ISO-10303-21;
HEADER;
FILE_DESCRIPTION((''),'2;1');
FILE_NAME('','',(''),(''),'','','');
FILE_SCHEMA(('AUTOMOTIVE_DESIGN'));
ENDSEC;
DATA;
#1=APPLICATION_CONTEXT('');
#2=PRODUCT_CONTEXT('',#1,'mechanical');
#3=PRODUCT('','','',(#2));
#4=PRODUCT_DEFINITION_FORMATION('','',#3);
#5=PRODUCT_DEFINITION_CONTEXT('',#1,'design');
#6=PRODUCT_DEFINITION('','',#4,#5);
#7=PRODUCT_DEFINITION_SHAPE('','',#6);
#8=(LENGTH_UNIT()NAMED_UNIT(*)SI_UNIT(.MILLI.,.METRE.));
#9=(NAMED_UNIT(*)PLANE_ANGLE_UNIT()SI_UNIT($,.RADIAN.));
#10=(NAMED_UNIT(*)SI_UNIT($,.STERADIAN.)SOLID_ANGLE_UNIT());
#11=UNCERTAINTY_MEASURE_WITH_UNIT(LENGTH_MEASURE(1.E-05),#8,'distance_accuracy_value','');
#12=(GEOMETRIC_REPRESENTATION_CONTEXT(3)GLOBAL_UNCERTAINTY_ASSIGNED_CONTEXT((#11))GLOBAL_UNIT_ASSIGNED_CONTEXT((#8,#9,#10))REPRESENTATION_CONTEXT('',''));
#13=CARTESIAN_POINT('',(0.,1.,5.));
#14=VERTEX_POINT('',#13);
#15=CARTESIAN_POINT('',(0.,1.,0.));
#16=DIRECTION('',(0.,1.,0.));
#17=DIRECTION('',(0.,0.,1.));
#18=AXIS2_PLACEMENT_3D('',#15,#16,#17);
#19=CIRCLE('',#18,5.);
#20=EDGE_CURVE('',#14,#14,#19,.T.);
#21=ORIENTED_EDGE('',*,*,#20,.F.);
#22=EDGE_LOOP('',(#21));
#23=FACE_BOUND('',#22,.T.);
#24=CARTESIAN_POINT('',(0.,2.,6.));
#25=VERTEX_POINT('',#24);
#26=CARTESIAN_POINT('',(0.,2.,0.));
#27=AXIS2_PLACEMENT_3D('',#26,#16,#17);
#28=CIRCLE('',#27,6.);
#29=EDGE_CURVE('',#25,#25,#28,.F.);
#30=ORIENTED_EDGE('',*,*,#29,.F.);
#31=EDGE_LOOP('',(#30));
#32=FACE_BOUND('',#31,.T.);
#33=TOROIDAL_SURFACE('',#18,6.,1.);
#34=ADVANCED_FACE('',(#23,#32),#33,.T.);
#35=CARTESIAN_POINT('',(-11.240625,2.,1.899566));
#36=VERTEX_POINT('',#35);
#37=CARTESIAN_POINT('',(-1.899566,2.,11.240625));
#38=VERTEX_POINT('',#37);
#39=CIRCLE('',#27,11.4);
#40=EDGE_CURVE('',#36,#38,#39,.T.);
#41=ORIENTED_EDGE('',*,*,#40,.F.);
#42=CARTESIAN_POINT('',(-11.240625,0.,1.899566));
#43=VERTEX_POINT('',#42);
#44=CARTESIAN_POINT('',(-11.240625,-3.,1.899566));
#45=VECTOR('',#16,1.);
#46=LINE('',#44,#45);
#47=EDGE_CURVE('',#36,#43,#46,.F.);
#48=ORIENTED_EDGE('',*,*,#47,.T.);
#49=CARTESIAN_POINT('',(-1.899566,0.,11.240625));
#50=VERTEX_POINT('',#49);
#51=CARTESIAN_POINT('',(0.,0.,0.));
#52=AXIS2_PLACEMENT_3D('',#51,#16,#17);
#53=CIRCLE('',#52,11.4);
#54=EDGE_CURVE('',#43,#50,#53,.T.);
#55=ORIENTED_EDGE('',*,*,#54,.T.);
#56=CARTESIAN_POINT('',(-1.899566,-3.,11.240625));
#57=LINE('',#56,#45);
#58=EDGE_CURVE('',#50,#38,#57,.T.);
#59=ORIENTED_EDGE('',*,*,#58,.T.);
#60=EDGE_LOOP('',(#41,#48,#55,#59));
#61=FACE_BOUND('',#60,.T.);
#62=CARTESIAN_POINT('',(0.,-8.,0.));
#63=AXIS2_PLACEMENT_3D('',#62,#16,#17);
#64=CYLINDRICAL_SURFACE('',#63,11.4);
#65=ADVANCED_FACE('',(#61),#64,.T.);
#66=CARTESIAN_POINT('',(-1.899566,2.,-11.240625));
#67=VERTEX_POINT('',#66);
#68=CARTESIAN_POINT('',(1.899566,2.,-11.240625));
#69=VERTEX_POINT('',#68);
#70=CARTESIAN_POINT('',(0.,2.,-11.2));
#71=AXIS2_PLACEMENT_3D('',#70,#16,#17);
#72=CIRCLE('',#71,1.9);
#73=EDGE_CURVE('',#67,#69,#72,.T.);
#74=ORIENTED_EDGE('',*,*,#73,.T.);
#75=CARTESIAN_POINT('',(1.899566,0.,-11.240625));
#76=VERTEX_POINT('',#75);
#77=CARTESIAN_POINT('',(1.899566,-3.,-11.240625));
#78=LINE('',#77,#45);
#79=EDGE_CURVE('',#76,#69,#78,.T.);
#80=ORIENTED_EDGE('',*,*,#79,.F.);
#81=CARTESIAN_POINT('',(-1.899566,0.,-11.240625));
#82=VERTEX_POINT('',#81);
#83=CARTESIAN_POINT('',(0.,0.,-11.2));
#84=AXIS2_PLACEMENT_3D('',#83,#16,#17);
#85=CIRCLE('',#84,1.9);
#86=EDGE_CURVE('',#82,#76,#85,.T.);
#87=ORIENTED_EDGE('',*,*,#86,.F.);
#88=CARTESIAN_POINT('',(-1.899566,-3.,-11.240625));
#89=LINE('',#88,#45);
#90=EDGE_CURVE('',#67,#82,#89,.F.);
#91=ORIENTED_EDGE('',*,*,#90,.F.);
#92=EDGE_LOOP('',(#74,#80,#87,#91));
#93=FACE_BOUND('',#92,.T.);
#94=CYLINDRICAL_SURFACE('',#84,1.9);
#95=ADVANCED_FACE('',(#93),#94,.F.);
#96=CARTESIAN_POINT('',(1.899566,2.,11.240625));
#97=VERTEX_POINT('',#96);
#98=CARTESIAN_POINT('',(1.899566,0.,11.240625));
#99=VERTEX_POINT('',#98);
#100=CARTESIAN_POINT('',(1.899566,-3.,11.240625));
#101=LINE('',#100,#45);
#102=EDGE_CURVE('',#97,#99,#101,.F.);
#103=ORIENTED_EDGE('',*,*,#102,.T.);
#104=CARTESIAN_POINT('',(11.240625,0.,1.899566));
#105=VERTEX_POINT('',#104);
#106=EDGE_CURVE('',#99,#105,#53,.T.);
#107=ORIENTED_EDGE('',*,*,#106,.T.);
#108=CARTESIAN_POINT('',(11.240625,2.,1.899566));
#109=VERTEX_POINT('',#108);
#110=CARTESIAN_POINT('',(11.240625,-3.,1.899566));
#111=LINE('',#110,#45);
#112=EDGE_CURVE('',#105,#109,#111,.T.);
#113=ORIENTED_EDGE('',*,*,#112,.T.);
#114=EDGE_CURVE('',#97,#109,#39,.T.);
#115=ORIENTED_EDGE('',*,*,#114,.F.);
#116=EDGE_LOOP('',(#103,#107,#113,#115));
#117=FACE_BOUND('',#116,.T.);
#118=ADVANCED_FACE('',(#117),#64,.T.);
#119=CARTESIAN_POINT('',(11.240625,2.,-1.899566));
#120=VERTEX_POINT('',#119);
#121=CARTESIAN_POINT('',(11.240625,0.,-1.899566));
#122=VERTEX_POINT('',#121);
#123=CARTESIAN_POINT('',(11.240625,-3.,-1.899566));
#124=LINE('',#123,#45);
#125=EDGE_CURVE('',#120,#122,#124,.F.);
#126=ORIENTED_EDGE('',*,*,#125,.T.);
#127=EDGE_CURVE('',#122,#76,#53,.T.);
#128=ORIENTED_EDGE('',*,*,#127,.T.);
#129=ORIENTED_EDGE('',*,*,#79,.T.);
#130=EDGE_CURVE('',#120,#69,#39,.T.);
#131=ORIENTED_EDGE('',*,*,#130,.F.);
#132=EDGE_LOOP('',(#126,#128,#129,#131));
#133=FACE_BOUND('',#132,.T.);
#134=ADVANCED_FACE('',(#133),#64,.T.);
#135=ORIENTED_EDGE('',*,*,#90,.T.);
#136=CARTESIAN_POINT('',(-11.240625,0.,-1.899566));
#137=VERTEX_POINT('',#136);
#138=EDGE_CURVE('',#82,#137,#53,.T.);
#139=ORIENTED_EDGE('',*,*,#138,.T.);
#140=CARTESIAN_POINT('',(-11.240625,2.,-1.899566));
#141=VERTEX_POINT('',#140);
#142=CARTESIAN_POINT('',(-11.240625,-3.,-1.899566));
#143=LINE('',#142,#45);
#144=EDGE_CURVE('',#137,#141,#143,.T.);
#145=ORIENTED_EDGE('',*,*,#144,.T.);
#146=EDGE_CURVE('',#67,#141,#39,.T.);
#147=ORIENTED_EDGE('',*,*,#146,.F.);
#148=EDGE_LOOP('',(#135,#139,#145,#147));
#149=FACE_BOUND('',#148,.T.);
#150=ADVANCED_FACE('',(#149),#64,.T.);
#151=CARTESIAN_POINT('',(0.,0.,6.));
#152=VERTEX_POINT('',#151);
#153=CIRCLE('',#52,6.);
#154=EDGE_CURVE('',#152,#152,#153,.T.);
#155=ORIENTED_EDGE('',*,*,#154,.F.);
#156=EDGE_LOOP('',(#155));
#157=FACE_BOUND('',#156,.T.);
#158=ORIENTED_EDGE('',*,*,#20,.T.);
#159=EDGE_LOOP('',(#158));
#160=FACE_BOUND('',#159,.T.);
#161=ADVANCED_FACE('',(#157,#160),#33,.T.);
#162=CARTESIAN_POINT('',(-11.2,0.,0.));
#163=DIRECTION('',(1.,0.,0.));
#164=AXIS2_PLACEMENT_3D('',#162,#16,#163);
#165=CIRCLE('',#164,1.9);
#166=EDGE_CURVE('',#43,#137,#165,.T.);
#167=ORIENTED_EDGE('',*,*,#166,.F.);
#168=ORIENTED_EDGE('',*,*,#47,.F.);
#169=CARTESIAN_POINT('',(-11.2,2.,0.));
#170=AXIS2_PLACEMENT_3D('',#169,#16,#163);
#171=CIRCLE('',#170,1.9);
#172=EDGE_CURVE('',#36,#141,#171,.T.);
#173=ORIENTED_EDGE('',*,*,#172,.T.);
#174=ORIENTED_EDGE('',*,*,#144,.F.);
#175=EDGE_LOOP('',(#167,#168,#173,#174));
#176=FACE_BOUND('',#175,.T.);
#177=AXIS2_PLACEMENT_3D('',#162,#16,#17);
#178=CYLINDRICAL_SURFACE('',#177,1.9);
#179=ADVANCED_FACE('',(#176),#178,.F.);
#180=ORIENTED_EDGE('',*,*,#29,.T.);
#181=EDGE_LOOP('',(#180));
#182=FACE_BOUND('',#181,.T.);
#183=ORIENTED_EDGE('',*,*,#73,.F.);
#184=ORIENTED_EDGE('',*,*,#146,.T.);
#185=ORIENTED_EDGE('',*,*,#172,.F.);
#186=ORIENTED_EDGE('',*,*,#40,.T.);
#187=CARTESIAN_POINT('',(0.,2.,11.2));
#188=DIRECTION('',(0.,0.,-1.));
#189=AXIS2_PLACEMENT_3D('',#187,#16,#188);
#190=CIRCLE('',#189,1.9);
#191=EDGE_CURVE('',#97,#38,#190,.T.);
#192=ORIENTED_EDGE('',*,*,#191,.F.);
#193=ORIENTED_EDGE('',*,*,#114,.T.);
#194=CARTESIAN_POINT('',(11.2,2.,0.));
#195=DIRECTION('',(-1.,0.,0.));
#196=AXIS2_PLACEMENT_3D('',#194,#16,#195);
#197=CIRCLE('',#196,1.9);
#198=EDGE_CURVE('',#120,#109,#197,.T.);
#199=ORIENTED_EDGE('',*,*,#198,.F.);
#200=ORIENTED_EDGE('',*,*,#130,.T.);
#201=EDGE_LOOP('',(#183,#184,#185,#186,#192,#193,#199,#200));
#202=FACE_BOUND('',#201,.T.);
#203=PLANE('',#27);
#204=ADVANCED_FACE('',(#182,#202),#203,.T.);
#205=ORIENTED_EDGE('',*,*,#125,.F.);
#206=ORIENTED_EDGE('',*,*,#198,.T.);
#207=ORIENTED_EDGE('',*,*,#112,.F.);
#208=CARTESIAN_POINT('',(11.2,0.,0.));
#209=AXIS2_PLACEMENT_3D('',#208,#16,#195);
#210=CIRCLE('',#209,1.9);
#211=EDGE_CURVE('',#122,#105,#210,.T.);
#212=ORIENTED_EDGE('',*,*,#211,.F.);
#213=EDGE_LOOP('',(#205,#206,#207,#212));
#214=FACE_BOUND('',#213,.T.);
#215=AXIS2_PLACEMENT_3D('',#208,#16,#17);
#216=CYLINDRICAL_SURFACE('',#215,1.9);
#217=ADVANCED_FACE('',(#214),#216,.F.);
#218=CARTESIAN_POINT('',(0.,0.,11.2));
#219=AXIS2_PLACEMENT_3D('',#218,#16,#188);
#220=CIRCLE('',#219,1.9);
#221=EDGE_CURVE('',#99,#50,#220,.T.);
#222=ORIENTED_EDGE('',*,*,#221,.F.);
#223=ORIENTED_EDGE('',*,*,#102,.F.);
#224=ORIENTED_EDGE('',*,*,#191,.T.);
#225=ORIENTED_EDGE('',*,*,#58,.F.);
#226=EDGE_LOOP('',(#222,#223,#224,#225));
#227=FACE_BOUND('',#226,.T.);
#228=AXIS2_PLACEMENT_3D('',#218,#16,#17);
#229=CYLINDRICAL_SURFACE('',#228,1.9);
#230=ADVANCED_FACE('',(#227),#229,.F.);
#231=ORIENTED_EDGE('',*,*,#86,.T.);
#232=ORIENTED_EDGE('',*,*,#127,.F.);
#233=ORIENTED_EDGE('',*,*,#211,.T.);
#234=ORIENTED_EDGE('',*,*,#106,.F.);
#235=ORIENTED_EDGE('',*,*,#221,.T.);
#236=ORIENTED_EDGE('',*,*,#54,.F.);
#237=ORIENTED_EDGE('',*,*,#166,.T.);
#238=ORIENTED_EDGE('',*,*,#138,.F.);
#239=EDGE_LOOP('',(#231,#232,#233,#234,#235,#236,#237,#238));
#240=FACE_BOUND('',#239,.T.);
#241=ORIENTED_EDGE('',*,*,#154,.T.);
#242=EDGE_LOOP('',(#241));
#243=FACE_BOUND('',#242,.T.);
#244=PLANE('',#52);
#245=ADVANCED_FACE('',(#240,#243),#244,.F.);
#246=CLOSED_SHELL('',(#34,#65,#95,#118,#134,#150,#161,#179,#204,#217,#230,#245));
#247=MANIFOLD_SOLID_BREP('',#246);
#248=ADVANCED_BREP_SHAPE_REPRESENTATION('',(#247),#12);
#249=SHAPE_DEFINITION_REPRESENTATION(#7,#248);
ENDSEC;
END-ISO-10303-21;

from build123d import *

# Parameters (mm, degrees)
SKETCH2_R           = 13.2
BOSS_EXTRUDE1_DEPTH = 2
SKETCH3_R           = 1.9
CUT_EXTRUDE1_DEPTH  = 2
SKETCH4_R           = 5
CUT_EXTRUDE2_DEPTH  = 2
CIRPATTERN1_COUNT   = 4
FILLET2_R           = 1
CUT_EXTRUDE3_START  = -10
SKETCH6_R           = 13.2
SKETCH6_R_2         = 11.4
CUT_EXTRUDE3_DEPTH  = 10


with BuildPart() as part:
    # Sketch2 → Boss-Extrude1 (new body)
    with BuildSketch(Plane(origin=(0, 0, 0), x_dir=(1, 0, 0), z_dir=(0, 1, 0))):
        with Locations(Location((0, 0, 0), (0, 0, 270))):
            Circle(SKETCH2_R)
    extrude(amount=BOSS_EXTRUDE1_DEPTH)

    # Sketch3 → Cut-Extrude1 (cut)
    with BuildSketch(Plane(origin=(0, 2, 0), x_dir=(1, 0, 0), z_dir=(0, 1, 0))):
        with Locations(Location((0, 11.2, 0), (0, 0, 270))):
            Circle(SKETCH3_R)
    cut_extrude1 = extrude(amount=-CUT_EXTRUDE1_DEPTH, mode=Mode.SUBTRACT)

    # Sketch4 → Cut-Extrude2 (cut)
    with BuildSketch(Plane(origin=(0, 2, 0), x_dir=(1, 0, 0), z_dir=(0, 1, 0))):
        with Locations(Location((0, 0, 0), (0, 0, 270))):
            Circle(SKETCH4_R)
    extrude(amount=-CUT_EXTRUDE2_DEPTH, mode=Mode.SUBTRACT)

    # CirPattern1: Cut-Extrude1 ×4 about axis
    cirpattern1_axis = Axis((0, 0, 0), (0, 1, 0))
    for i in range(1, CIRPATTERN1_COUNT):
        add(cut_extrude1.rotate(cirpattern1_axis, i * 360 / CIRPATTERN1_COUNT), mode=Mode.SUBTRACT)

    # Fillet2
    fillet2_edges = [part.edges().sort_by_distance(p)[0] for p in [
        (0, 0, -5),
        (0, 2, -5),
    ]]
    fillet(fillet2_edges, radius=FILLET2_R - 0.0001)  # a hair under: the kernel refuses the full size

    # Sketch6 → Cut-Extrude3 (cut)
    with BuildSketch(Plane(origin=(0, 2, 0), x_dir=(1, 0, 0), z_dir=(0, 1, 0)).offset(CUT_EXTRUDE3_START)):
        Circle(SKETCH6_R)
        Circle(SKETCH6_R_2, mode=Mode.SUBTRACT)
    extrude(amount=CUT_EXTRUDE3_DEPTH, mode=Mode.SUBTRACT)


solid = part.part
